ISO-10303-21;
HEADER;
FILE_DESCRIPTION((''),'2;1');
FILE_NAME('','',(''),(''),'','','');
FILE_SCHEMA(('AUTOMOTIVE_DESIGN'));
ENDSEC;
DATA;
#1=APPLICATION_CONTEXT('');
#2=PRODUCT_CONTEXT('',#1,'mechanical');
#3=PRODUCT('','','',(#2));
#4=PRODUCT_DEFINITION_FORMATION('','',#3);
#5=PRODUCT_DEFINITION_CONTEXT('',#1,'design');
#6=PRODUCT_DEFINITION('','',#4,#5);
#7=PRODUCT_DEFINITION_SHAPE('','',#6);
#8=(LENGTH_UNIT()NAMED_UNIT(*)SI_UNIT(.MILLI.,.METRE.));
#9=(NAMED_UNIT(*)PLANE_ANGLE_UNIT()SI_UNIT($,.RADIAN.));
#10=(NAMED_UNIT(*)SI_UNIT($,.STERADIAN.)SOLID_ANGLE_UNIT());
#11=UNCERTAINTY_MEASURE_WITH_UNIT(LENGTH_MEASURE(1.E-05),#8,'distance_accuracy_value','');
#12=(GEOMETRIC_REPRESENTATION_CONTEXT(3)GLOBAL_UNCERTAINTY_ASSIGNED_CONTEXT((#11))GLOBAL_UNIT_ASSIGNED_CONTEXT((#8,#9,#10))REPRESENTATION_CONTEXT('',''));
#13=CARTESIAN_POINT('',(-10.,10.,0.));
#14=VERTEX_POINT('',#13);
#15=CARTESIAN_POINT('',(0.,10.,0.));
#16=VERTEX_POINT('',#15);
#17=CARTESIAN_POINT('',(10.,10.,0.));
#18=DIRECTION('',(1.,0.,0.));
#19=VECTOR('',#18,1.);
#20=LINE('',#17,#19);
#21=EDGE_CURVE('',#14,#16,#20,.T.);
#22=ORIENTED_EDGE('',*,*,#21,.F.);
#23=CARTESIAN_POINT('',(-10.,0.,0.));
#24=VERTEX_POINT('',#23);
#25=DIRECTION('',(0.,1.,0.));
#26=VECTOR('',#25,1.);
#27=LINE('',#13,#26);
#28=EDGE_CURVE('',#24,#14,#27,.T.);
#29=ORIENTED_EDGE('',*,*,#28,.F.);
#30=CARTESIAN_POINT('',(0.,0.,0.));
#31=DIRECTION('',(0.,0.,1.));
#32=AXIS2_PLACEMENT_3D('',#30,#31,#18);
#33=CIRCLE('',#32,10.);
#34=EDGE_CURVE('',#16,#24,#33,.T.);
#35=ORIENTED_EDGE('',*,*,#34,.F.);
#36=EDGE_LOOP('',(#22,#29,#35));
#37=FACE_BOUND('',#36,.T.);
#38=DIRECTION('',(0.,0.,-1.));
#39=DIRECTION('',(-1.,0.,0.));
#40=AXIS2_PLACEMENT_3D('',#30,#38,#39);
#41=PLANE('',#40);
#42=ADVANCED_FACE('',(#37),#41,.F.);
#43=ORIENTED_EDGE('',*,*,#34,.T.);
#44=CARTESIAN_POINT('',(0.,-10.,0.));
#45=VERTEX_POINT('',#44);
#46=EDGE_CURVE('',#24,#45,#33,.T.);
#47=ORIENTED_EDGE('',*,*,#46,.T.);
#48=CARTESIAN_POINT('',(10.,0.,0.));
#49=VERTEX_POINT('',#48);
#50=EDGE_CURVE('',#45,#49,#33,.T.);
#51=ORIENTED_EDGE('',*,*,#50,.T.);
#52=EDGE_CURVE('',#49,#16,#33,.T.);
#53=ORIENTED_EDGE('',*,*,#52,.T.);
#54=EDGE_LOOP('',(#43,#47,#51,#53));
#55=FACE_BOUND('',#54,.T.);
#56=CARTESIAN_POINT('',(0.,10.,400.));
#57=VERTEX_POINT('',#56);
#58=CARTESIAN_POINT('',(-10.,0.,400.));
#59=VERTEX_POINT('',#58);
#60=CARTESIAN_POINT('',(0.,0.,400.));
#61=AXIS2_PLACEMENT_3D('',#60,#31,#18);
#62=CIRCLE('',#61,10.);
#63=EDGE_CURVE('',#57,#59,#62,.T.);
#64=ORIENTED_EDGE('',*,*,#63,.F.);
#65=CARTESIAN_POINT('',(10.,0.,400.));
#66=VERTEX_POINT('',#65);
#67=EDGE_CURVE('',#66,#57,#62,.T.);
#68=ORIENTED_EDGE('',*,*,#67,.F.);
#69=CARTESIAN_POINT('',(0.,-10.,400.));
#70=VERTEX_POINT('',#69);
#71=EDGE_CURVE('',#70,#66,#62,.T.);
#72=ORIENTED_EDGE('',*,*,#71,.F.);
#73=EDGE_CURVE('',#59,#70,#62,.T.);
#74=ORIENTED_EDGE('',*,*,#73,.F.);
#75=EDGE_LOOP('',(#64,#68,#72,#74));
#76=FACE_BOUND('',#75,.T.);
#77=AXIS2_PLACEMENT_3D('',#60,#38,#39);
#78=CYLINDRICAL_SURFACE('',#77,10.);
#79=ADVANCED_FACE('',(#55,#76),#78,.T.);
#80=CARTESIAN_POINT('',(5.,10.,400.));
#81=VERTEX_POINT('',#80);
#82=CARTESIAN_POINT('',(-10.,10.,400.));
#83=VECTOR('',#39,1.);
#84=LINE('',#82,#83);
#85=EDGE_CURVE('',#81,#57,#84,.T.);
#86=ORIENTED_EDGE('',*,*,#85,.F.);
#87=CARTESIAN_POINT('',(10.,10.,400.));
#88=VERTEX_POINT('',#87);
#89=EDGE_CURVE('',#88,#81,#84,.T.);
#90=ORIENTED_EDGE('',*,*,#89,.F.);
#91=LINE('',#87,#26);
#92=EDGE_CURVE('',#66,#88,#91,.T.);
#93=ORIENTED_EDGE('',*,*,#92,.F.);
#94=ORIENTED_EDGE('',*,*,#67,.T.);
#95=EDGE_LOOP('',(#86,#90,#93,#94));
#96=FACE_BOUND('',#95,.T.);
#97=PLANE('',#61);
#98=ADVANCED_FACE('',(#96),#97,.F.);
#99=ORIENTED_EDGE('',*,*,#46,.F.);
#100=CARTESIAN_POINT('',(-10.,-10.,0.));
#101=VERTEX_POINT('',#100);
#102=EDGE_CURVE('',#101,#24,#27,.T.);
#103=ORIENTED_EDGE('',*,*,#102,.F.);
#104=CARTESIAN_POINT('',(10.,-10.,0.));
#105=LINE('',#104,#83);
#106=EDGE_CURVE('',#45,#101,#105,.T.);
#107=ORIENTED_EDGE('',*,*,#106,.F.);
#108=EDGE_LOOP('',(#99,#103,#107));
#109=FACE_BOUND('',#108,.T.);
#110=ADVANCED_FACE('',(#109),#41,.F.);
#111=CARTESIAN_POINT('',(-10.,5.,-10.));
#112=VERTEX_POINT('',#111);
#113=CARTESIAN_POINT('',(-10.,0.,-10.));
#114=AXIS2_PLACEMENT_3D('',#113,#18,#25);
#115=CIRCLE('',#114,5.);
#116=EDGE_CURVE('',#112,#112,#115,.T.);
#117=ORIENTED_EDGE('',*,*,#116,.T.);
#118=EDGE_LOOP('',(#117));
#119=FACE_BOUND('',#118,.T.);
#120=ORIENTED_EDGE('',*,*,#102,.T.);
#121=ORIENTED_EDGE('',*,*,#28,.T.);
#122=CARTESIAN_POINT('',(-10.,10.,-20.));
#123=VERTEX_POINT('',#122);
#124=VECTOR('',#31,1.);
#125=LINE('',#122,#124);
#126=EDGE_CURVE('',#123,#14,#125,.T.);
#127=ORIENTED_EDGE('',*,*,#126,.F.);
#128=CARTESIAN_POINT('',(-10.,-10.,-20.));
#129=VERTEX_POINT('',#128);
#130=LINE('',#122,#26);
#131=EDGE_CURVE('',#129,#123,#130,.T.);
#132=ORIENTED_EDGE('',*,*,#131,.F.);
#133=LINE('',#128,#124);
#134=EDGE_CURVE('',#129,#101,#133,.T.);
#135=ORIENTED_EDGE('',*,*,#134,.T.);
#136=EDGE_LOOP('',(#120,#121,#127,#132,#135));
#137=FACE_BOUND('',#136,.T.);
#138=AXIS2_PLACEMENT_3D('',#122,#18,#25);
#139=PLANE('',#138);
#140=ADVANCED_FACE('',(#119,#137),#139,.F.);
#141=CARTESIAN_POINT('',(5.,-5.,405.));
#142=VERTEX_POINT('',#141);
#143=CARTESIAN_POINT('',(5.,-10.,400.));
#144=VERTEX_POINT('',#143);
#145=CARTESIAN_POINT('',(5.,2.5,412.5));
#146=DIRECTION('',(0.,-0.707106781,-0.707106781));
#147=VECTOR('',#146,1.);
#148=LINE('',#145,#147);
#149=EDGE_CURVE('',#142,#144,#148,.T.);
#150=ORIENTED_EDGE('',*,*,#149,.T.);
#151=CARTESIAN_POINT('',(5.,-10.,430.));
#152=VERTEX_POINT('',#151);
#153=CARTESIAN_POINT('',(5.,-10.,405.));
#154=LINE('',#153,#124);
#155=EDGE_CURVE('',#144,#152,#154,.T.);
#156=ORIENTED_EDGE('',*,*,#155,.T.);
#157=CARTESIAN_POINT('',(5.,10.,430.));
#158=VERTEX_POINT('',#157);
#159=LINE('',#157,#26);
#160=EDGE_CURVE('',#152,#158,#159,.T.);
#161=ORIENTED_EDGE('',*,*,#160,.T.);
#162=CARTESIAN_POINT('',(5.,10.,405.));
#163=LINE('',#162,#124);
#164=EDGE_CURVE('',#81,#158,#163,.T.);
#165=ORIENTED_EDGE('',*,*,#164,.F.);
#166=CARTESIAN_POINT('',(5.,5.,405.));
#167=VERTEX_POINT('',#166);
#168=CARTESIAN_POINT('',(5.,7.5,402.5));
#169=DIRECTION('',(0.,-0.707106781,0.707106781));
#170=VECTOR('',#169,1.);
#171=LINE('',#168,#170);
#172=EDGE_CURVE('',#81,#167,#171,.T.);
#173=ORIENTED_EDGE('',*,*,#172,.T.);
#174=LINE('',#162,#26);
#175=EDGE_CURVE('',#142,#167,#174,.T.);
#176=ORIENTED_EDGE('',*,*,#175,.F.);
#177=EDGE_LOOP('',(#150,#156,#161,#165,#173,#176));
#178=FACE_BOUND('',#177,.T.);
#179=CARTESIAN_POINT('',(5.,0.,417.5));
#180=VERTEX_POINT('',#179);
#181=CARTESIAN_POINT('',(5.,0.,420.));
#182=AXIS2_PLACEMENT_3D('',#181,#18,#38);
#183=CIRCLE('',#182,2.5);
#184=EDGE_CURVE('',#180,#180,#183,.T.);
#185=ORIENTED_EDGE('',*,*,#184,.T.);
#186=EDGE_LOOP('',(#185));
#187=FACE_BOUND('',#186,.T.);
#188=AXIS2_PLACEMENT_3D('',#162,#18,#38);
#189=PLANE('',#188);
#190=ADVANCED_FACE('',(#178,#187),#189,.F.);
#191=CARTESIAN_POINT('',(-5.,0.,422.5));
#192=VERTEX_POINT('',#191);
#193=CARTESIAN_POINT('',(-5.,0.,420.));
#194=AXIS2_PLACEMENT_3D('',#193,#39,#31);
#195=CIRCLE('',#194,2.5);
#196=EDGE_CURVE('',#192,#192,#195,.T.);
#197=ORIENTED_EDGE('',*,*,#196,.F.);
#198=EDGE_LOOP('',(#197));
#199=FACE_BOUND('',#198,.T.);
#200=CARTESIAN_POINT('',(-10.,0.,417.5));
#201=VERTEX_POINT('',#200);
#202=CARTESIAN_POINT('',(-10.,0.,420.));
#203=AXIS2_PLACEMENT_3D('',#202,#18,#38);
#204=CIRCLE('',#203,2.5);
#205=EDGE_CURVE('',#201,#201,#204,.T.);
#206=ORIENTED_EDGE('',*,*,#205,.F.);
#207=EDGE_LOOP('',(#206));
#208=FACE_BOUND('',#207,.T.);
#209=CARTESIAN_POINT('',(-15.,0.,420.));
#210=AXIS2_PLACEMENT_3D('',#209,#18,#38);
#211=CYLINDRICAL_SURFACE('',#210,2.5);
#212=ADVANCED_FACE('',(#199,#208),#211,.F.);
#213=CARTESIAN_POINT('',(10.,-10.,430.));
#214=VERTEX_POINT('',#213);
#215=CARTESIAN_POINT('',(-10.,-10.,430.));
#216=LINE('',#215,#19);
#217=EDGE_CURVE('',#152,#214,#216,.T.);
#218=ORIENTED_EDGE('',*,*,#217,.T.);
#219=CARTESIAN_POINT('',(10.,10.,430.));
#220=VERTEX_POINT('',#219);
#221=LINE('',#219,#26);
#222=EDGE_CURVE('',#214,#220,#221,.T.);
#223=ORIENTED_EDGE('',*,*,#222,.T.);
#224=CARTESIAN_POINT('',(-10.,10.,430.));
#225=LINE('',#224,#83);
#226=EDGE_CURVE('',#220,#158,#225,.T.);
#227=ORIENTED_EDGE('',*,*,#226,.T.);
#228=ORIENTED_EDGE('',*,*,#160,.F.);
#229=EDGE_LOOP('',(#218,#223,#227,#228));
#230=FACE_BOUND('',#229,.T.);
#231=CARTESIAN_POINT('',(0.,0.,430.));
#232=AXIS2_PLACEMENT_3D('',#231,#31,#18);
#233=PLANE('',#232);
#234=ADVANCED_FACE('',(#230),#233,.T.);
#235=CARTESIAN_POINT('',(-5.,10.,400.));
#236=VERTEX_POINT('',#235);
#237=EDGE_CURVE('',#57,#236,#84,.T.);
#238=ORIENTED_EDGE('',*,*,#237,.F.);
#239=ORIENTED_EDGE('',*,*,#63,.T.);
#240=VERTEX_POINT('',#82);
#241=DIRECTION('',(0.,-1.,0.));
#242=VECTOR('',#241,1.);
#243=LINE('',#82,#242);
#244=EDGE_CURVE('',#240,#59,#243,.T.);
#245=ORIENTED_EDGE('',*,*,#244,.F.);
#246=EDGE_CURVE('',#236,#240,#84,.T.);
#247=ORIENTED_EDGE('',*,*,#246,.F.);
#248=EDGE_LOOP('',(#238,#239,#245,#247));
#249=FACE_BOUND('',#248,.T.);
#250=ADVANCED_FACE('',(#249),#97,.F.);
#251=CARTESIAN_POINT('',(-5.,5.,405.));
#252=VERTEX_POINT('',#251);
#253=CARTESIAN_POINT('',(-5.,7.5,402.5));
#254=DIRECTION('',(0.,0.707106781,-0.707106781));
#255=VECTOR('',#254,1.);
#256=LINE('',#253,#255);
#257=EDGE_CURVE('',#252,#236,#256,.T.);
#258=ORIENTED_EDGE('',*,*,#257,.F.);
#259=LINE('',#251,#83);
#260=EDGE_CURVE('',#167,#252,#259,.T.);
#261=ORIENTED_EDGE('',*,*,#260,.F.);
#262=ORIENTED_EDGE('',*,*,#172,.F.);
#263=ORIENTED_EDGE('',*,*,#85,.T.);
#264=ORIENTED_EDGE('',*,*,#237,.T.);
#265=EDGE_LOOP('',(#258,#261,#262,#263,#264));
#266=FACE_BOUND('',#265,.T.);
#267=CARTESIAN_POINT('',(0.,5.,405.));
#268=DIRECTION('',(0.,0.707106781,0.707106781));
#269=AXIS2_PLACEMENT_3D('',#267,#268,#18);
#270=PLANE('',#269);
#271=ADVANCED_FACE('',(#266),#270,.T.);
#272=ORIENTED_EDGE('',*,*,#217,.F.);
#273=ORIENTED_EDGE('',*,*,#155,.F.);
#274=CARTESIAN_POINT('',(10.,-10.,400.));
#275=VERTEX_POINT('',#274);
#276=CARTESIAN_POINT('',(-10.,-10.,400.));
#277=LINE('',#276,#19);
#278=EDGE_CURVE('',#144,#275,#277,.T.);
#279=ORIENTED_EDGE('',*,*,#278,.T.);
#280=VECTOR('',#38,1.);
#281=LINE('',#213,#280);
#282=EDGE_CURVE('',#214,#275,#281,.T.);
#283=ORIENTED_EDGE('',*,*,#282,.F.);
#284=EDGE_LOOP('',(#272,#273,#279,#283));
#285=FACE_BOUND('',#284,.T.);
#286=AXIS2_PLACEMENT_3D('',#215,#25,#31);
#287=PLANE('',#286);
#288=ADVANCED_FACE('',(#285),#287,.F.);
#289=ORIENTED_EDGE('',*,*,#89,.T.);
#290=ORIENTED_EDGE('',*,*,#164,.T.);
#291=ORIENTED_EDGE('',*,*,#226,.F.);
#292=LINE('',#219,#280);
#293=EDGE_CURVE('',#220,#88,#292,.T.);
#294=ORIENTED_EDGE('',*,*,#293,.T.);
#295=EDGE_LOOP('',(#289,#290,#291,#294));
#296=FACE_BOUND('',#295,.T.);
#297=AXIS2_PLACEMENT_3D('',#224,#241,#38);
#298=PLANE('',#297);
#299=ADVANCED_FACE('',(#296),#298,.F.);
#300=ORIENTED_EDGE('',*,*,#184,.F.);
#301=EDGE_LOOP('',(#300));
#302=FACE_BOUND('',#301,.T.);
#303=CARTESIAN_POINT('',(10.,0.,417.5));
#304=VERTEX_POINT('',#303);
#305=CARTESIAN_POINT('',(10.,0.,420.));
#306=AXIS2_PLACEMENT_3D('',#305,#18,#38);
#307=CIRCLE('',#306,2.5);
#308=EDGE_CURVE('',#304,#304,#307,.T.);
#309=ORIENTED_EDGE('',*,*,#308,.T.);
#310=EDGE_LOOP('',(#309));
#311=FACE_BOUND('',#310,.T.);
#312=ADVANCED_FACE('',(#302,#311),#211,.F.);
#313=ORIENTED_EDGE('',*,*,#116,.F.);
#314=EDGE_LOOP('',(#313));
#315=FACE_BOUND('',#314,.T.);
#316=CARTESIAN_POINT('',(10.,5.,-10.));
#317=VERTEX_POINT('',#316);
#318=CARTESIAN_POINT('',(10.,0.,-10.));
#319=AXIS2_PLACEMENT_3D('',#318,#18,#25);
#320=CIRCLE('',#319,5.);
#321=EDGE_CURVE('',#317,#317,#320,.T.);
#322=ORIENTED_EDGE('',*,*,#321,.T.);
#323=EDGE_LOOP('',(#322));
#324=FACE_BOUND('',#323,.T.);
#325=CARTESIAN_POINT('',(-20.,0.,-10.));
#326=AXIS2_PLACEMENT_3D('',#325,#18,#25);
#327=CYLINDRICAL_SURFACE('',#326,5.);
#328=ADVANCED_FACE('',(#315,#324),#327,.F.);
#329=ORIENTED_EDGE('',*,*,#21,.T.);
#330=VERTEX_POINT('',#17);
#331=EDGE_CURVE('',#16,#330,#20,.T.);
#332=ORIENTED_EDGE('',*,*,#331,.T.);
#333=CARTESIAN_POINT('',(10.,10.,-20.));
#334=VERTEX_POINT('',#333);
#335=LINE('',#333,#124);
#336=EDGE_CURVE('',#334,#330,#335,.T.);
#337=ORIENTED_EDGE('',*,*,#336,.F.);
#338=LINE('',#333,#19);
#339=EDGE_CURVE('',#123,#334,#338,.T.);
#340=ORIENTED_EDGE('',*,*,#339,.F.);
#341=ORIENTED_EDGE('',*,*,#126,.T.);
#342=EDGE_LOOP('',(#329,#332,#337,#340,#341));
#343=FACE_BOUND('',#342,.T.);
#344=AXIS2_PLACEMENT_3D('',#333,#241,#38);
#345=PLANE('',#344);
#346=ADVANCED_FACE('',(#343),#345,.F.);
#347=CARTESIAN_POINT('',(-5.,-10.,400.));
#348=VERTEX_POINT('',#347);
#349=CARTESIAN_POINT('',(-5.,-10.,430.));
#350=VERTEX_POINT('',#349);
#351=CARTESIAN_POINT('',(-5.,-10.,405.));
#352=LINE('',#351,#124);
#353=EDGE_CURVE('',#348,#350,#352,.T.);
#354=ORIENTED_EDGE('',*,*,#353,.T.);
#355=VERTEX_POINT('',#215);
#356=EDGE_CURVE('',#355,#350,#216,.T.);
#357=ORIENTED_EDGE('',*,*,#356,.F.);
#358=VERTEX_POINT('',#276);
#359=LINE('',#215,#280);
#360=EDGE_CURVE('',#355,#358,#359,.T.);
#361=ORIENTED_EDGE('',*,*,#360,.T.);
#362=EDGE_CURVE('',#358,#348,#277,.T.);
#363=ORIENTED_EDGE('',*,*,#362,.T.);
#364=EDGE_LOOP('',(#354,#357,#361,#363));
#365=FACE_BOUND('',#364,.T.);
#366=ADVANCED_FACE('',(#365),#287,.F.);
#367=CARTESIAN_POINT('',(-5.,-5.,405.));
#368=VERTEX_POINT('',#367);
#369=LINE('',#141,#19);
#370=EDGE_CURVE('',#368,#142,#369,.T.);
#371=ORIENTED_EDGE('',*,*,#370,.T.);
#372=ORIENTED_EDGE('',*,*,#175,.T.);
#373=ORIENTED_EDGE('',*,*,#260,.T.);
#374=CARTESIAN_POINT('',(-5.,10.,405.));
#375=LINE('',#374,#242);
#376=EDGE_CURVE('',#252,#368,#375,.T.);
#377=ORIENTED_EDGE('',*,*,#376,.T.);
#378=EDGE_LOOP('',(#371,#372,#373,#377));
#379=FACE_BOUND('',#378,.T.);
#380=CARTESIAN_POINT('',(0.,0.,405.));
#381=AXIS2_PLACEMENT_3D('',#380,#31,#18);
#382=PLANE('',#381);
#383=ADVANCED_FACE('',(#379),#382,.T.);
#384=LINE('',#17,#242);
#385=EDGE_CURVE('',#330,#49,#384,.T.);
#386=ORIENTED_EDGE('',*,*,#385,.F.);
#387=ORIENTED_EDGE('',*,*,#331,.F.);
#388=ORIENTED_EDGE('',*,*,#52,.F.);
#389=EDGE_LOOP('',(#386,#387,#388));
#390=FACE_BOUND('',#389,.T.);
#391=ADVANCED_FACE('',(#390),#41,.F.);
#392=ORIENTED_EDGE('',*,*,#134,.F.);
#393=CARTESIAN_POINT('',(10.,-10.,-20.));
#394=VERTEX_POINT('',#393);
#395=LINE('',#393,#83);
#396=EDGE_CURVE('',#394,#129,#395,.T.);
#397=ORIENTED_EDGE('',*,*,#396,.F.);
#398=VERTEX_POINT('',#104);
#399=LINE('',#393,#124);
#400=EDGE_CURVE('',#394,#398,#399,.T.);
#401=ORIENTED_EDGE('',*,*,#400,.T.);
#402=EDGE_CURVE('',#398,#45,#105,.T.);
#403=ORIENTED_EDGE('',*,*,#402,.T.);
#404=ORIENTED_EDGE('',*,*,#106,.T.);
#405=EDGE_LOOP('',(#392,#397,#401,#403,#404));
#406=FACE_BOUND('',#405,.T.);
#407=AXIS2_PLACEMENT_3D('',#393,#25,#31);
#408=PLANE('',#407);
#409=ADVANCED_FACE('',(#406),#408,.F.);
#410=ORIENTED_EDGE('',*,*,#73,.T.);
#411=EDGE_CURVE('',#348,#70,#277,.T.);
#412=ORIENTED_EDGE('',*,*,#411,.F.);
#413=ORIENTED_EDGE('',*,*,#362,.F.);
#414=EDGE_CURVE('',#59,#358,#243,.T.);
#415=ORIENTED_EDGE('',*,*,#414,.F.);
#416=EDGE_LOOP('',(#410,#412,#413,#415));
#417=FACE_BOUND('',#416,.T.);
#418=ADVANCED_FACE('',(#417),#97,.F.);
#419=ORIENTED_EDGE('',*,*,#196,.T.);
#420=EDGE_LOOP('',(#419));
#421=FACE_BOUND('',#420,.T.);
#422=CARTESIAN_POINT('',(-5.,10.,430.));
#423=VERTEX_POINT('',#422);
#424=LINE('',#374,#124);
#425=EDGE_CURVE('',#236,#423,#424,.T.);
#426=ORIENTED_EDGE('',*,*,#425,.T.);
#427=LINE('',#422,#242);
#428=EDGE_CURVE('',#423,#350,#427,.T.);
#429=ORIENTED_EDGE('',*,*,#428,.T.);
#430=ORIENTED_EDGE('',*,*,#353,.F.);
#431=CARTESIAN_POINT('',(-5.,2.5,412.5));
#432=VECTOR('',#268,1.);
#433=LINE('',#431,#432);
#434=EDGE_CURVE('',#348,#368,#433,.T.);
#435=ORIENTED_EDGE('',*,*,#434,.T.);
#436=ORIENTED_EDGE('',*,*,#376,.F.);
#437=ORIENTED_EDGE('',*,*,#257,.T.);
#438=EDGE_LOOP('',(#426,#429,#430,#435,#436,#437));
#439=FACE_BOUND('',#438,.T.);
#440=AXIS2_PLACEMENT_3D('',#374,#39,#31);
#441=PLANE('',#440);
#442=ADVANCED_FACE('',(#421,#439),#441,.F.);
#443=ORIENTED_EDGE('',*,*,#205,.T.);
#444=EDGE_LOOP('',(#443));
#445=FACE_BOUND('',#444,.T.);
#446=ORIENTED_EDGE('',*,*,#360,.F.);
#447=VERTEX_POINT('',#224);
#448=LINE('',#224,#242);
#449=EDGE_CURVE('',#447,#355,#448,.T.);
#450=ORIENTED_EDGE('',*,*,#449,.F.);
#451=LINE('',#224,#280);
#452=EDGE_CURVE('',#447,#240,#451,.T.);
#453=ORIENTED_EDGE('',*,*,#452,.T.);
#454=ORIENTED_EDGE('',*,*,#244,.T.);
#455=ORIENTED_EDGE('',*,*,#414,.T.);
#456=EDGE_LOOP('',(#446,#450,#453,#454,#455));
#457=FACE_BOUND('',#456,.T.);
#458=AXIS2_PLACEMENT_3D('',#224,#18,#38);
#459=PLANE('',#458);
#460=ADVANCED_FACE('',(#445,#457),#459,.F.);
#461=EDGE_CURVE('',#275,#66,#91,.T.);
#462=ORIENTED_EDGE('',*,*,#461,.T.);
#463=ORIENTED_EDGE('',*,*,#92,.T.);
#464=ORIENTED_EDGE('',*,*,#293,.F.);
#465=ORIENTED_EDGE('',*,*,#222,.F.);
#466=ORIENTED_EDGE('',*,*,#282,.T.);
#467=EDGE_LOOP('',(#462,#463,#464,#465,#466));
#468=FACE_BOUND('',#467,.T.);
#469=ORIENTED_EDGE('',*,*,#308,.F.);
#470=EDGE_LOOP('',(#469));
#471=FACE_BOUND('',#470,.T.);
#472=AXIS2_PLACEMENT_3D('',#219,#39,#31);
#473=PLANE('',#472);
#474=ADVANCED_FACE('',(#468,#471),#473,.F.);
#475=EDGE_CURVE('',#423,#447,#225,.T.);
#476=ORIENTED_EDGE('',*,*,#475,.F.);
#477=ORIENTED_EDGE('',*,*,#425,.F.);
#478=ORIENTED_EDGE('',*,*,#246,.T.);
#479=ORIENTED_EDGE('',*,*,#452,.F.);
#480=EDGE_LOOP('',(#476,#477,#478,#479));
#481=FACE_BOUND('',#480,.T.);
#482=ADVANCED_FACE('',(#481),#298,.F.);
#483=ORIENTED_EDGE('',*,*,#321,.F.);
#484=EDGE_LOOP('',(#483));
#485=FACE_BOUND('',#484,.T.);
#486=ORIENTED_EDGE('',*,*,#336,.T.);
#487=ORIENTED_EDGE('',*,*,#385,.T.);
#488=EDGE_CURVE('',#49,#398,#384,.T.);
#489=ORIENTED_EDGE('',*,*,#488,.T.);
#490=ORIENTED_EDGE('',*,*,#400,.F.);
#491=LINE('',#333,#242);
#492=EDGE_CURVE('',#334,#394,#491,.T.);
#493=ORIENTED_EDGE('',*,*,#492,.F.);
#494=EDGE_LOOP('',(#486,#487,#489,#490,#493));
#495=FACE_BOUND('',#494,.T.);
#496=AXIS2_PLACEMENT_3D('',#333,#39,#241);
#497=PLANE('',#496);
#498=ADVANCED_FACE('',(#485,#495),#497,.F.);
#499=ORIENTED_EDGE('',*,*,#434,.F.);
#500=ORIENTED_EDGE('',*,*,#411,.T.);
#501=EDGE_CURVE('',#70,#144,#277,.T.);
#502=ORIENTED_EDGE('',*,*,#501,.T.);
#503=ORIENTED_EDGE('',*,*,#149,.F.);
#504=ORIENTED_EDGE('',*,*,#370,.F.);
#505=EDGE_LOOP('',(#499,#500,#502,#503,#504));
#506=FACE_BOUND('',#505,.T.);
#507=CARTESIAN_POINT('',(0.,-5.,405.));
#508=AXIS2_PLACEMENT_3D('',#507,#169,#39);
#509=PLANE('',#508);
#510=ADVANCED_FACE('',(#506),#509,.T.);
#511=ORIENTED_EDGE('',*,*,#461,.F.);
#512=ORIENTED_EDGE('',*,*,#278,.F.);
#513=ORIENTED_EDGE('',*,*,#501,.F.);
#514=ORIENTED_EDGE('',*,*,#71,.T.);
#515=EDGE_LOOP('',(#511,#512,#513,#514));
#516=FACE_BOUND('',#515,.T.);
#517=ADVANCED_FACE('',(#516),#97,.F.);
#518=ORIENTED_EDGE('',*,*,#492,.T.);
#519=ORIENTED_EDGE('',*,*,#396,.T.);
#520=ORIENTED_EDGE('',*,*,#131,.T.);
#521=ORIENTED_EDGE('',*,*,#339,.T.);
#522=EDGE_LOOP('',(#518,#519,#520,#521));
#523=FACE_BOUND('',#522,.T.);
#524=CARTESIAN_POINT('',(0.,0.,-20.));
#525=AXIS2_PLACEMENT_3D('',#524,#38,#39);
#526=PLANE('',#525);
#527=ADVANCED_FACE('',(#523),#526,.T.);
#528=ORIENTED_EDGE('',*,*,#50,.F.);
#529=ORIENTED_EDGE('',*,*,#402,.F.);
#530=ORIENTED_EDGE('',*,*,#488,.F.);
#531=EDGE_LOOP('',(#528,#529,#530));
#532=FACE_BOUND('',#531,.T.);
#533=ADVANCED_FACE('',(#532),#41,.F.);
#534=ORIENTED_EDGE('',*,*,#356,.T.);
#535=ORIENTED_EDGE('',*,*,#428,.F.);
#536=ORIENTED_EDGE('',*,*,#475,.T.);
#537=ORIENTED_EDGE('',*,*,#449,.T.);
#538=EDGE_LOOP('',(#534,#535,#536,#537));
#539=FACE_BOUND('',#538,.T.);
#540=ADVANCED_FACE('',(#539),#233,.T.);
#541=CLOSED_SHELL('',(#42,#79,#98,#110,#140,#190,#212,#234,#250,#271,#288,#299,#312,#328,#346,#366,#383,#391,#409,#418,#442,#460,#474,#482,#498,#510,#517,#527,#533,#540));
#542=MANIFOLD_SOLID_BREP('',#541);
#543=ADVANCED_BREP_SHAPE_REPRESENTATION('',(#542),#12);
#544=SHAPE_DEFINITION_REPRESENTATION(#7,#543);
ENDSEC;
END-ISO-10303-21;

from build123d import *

# Parameters (mm, degrees)
SKIZZE1_R                       = 10
AUFSATZ_LINEAR_AUSTRAGEN1_DEPTH = 400
SKIZZE2_W                       = 20
SKIZZE2_H                       = 20
AUFSATZ_LINEAR_AUSTRAGEN2_DEPTH = 20
SKIZZE3_R                       = 5
SCHNITT_LINEAR_AUSTRAGEN1_DEPTH = 30
SKIZZE4_W                       = 20
SKIZZE4_H                       = 20
AUFSATZ_LINEAR_AUSTRAGEN3_DEPTH = 30
SKIZZE5_W                       = 10
SKIZZE5_H                       = 20
SCHNITT_LINEAR_AUSTRAGEN2_DEPTH = 25
FASE1_SIZE                      = 5
SKIZZE6_R                       = 2.5
SCHNITT_LINEAR_AUSTRAGEN3_DEPTH = 25


with BuildPart() as part:
    # Skizze1 → Aufsatz-Linear austragen1 (new body)
    with BuildSketch(Plane.XY):
        Circle(SKIZZE1_R)
    extrude(amount=AUFSATZ_LINEAR_AUSTRAGEN1_DEPTH)

    # Skizze2 → Aufsatz-Linear austragen2 (add)
    with BuildSketch(Plane(origin=(0, 0, 0), x_dir=(-1, 0, 0), z_dir=(0, 0, -1))):
        Rectangle(SKIZZE2_W, SKIZZE2_H)
    extrude(amount=AUFSATZ_LINEAR_AUSTRAGEN2_DEPTH)

    # Skizze3 → Schnitt-Linear austragen1 (cut)
    with BuildSketch(Plane(origin=(10, 0, 0), x_dir=(0, 0, -1), z_dir=(1, 0, 0))):
        with Locations(Location((10, 0, 0), (0, 0, 90))):
            Circle(SKIZZE3_R)
    extrude(amount=-SCHNITT_LINEAR_AUSTRAGEN1_DEPTH, mode=Mode.SUBTRACT)

    # Skizze4 → Aufsatz-Linear austragen3 (add)
    with BuildSketch(Plane.XY.offset(400)):
        Rectangle(SKIZZE4_W, SKIZZE4_H)
    extrude(amount=AUFSATZ_LINEAR_AUSTRAGEN3_DEPTH)

    # Skizze5 → Schnitt-Linear austragen2 (cut)
    with BuildSketch(Plane.XY.offset(430)):
        Rectangle(SKIZZE5_W, SKIZZE5_H)
    extrude(amount=-SCHNITT_LINEAR_AUSTRAGEN2_DEPTH, mode=Mode.SUBTRACT)

    # Fase1
    fase1_edges = [part.edges().sort_by_distance(p)[0] for p in [
        (0, -10, 405),
        (0, 10, 405),
    ]]
    chamfer(fase1_edges, length=FASE1_SIZE - 0.0001)  # a hair under: the kernel refuses the full size

    # Skizze6 → Schnitt-Linear austragen3 (cut)
    with BuildSketch(Plane(origin=(10, 0, 0), x_dir=(0, 0, -1), z_dir=(1, 0, 0))):
        with Locations((-420, 0)):
            Circle(SKIZZE6_R)
    extrude(amount=-SCHNITT_LINEAR_AUSTRAGEN3_DEPTH, mode=Mode.SUBTRACT)


solid = part.part
